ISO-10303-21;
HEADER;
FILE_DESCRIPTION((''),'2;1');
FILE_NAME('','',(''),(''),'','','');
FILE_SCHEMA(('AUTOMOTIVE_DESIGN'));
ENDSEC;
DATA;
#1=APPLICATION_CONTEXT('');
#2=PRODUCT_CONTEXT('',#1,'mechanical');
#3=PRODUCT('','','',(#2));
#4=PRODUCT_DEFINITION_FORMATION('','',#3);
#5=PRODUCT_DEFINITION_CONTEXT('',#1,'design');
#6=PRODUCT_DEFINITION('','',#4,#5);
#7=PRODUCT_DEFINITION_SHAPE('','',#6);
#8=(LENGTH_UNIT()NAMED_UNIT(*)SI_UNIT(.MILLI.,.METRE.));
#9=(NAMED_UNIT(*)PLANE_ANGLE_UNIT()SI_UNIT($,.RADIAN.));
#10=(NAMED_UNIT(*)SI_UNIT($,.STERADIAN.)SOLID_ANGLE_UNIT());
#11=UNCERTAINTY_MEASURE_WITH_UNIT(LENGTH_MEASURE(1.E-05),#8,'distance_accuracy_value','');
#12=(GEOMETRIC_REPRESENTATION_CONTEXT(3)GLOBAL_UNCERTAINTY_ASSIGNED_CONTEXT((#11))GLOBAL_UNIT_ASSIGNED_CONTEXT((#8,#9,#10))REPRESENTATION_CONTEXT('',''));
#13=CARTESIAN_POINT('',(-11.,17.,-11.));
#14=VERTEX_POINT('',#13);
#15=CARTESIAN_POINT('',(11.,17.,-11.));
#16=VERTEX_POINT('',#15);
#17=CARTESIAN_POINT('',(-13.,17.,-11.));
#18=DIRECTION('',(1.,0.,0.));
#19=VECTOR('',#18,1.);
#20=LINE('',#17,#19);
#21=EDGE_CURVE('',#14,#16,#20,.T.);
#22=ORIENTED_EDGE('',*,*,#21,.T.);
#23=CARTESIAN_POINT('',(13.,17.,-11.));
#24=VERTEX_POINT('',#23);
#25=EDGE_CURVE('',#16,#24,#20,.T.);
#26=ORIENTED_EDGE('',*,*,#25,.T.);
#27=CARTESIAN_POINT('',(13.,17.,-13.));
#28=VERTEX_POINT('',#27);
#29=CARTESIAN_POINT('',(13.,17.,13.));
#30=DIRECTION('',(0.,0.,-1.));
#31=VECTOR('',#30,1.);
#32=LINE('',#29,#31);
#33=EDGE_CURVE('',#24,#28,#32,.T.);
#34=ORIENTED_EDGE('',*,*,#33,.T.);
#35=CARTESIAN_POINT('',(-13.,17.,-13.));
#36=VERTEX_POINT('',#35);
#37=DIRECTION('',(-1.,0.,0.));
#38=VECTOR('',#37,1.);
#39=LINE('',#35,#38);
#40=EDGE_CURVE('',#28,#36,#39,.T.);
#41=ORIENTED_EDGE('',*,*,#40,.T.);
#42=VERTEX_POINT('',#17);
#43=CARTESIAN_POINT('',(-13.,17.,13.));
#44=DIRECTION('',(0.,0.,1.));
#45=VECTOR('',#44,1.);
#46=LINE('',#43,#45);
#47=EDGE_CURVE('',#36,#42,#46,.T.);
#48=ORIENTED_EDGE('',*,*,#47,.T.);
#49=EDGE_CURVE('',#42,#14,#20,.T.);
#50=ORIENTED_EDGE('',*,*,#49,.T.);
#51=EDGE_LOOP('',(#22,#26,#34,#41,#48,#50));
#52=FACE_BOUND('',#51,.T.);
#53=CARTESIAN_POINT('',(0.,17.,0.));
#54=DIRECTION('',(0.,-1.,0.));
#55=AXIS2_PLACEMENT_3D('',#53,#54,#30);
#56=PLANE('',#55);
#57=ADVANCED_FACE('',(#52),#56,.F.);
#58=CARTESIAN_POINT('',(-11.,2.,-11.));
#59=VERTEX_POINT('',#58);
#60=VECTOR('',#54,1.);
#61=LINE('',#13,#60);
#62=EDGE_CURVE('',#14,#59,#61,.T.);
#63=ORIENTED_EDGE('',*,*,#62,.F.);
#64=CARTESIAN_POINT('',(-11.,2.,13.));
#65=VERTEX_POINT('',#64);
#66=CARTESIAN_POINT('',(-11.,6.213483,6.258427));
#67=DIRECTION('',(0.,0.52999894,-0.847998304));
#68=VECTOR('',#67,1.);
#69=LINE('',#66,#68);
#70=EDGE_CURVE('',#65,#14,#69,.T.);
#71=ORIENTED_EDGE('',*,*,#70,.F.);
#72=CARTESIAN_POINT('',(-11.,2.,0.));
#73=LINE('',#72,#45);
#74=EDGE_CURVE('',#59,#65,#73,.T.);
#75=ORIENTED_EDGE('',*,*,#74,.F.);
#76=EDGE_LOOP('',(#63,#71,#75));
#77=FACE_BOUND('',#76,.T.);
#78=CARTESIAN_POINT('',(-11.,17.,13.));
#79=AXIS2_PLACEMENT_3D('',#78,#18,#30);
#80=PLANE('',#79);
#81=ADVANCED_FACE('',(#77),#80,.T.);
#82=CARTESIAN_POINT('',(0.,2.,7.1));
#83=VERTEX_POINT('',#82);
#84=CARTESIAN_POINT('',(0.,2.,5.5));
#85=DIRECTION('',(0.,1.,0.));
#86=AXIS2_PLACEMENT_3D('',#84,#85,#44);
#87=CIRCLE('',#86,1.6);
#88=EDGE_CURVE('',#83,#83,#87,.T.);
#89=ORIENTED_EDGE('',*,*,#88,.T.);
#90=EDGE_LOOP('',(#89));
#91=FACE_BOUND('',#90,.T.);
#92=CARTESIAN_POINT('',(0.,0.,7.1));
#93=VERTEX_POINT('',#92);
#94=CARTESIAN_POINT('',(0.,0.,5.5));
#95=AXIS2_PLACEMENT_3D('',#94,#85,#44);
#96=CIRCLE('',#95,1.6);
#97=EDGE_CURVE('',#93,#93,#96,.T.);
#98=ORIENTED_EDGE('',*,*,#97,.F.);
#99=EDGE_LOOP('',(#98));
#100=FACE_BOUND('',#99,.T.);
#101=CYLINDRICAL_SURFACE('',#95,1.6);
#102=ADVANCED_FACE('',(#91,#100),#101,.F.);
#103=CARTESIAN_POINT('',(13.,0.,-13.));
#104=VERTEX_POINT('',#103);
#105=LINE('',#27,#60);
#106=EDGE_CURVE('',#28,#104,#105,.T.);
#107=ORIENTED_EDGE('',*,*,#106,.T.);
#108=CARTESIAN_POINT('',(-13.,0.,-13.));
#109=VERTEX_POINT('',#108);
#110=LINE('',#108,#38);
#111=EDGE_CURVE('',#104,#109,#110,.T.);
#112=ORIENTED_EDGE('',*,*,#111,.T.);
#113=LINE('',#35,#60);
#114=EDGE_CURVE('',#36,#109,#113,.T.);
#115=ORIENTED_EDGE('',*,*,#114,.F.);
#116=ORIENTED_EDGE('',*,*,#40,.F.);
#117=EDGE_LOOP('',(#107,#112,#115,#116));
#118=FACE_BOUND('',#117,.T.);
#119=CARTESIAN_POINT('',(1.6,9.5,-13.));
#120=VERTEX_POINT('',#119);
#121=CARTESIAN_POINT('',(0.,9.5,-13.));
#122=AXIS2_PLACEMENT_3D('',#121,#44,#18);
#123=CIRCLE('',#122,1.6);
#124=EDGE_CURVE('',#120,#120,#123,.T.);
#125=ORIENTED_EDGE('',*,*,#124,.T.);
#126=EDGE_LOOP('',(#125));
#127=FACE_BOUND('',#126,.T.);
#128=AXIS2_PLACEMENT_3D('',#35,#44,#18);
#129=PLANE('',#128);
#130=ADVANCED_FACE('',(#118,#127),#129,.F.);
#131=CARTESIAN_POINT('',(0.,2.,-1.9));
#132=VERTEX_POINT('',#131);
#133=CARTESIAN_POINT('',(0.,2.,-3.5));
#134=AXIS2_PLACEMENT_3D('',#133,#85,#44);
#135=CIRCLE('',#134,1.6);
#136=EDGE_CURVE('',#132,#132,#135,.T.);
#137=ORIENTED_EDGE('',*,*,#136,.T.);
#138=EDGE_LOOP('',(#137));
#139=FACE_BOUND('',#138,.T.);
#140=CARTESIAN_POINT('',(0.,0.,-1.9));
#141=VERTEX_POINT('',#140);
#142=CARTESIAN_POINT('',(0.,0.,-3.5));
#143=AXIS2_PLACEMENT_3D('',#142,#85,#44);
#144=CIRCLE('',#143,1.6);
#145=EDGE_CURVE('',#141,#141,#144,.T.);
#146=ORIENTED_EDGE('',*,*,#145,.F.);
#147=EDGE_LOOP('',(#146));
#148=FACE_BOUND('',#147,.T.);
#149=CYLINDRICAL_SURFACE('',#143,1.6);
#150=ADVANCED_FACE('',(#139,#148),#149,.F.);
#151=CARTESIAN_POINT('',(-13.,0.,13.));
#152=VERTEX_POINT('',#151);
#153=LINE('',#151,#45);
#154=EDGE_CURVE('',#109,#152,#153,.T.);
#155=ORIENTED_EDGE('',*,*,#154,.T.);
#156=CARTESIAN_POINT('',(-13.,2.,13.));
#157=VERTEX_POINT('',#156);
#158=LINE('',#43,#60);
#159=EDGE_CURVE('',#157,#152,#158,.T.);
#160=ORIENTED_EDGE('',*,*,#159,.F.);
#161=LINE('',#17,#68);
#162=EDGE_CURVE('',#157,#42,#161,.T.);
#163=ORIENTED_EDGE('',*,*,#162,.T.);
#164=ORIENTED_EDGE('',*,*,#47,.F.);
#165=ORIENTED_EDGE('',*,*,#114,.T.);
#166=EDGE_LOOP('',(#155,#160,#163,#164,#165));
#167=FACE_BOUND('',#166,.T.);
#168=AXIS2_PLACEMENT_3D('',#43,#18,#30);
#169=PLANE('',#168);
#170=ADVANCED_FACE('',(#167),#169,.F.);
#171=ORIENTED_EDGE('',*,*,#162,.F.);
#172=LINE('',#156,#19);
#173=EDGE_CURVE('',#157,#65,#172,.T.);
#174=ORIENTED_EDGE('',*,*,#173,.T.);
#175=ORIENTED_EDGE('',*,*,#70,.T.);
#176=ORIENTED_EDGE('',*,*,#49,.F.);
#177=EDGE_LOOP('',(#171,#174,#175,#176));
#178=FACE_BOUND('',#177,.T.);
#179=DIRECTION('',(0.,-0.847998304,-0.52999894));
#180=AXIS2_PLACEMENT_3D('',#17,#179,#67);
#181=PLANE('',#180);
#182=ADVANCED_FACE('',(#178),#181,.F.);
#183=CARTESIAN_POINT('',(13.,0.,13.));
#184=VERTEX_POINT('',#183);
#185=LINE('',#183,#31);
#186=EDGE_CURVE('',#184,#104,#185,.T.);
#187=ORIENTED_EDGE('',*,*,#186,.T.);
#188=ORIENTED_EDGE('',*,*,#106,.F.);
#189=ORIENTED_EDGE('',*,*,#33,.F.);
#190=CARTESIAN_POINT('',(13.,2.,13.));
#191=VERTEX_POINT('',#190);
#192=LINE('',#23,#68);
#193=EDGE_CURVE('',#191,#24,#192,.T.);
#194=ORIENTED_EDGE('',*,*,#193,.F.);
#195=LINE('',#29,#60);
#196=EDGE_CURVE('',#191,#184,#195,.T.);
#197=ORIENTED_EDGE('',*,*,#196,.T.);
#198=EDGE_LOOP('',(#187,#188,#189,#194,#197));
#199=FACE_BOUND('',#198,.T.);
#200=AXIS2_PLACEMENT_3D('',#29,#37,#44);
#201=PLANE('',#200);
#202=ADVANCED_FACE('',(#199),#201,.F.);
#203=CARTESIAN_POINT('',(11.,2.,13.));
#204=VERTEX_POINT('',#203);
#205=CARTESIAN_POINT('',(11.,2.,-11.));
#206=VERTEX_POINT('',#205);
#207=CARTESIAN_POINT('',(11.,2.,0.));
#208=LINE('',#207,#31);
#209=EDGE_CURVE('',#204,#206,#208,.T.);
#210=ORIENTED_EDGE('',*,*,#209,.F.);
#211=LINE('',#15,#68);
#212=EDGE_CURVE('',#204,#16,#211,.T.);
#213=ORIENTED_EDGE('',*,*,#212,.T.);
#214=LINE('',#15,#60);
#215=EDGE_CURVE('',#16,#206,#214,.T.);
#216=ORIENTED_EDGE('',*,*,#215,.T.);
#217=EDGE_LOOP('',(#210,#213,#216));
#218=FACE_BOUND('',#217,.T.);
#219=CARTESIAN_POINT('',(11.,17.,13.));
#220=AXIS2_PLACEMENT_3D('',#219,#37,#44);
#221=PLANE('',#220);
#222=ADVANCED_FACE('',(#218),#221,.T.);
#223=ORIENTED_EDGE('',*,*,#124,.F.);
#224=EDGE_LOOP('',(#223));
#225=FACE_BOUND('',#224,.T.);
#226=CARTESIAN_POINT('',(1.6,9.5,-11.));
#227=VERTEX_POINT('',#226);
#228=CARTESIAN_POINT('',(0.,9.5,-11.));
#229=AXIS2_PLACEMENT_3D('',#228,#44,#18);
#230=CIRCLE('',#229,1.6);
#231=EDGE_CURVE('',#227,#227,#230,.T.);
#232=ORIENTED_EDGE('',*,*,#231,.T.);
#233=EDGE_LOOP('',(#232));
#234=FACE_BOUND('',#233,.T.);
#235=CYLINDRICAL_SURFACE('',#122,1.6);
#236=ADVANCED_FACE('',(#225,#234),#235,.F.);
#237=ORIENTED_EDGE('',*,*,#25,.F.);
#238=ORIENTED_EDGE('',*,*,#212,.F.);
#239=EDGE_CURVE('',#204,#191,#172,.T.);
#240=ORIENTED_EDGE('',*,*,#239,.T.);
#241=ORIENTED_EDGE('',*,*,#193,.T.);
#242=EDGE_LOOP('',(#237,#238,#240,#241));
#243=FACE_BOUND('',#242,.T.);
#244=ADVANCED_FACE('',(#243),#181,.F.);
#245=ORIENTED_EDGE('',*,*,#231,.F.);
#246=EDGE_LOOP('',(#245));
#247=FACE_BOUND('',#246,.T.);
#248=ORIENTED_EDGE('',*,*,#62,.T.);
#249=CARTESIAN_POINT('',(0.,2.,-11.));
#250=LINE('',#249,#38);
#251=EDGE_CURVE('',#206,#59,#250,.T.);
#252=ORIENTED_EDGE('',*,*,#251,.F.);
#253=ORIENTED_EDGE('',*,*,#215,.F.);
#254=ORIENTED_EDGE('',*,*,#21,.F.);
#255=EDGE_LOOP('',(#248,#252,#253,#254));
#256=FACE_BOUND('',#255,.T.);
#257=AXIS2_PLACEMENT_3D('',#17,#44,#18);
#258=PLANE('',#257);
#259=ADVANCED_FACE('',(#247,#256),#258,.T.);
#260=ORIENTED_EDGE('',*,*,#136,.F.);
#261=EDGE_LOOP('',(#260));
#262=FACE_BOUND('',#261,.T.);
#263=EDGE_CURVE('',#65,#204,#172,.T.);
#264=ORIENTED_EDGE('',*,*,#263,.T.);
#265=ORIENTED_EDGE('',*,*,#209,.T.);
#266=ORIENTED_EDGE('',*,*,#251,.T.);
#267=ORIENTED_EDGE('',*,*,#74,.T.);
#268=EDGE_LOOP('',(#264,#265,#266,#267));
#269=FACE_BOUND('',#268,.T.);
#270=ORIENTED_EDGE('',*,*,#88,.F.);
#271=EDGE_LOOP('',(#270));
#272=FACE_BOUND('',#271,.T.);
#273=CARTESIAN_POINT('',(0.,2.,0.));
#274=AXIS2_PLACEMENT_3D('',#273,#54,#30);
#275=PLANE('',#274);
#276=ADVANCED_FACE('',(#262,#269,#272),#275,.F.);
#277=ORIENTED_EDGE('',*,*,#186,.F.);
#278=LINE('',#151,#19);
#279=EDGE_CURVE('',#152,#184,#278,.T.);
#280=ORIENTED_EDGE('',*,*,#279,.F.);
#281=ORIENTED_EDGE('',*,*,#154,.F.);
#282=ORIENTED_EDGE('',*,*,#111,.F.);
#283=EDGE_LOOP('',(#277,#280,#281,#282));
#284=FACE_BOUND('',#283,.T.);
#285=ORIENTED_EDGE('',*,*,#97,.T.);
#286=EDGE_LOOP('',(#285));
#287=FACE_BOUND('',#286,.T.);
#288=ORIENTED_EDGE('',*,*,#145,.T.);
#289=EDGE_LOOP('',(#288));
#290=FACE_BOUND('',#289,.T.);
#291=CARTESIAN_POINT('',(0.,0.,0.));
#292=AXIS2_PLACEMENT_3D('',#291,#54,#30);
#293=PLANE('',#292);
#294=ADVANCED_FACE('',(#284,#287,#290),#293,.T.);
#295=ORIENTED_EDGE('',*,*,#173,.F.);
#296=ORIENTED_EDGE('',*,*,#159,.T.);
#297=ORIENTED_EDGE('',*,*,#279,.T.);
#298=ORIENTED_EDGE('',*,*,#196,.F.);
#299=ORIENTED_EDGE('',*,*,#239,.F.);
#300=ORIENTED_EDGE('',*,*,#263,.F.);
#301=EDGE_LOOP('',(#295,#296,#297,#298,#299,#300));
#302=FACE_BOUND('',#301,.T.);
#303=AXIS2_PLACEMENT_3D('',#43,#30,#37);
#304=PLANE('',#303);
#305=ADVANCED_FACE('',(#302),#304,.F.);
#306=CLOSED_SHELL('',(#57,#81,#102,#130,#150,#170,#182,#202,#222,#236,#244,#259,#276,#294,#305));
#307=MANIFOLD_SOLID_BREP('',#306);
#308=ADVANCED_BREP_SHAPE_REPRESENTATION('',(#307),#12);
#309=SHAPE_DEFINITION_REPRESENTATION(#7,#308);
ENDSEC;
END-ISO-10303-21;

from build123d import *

# Parameters (mm, degrees)
SKETCH_1_W          = 26
SKETCH_1_H          = 26
EXTRUDE_1_DEPTH     = 17
CUT_EXTRUDE_1_DEPTH = 34.674916481
SHELL_START         = -11
SHELL_2_DEPTH       = 22
SKETCH_3_R          = 1.6
CUT_EXTRUDE_2_DEPTH = 24.727621035
SKETCH_4_R          = 1.6
CUT_EXTRUDE_3_DEPTH = 33.155870382


# Read off the part's stored shape, not the designer's step: ｼｪﾙ2
with BuildPart() as part:
    # ｽｹｯﾁ1 → ﾎﾞｽ - 押し出し1 (new body)
    with BuildSketch(Plane(origin=(0, 0, 0), x_dir=(1, 0, 0), z_dir=(0, 1, 0))):
        Rectangle(SKETCH_1_W, SKETCH_1_H)
    extrude(amount=EXTRUDE_1_DEPTH)

    # ｽｹｯﾁ2 → ｶｯﾄ - 押し出し1 (cut, through all)
    with BuildSketch(Plane(origin=(13, 0, 0), x_dir=(0, 0, -1), z_dir=(1, 0, 0))):
        Polygon((11, 17), (-13, 2), (-13, 17), align=None)
    extrude(amount=-CUT_EXTRUDE_1_DEPTH, mode=Mode.SUBTRACT)

    # ｼｪﾙ2 outline → ｼｪﾙ2 (cut)
    with BuildSketch(Plane.YZ.offset(SHELL_START)):
        Polygon((2, -11), (17, -11), (2, 13), align=None)
    extrude(amount=SHELL_2_DEPTH, mode=Mode.SUBTRACT)

    # ｽｹｯﾁ3 → ｶｯﾄ - 押し出し2 (cut, through all)
    with BuildSketch(Plane(origin=(0, 2, 0), x_dir=(1, 0, 0), z_dir=(0, 1, 0))):
        with Locations(Location((0, 3.5, 0), (0, 0, 270))):
            Circle(SKETCH_3_R)
        with Locations(Location((0, -5.5, 0), (0, 0, 270))):
            Circle(SKETCH_3_R)
    extrude(amount=-CUT_EXTRUDE_2_DEPTH, mode=Mode.SUBTRACT)

    # ｽｹｯﾁ4 → ｶｯﾄ - 押し出し3 (cut, through all)
    with BuildSketch(Plane.XY.offset(-11)):
        with Locations((0, 9.5)):
            Circle(SKETCH_4_R)
    extrude(amount=-CUT_EXTRUDE_3_DEPTH, mode=Mode.SUBTRACT)


solid = part.part
